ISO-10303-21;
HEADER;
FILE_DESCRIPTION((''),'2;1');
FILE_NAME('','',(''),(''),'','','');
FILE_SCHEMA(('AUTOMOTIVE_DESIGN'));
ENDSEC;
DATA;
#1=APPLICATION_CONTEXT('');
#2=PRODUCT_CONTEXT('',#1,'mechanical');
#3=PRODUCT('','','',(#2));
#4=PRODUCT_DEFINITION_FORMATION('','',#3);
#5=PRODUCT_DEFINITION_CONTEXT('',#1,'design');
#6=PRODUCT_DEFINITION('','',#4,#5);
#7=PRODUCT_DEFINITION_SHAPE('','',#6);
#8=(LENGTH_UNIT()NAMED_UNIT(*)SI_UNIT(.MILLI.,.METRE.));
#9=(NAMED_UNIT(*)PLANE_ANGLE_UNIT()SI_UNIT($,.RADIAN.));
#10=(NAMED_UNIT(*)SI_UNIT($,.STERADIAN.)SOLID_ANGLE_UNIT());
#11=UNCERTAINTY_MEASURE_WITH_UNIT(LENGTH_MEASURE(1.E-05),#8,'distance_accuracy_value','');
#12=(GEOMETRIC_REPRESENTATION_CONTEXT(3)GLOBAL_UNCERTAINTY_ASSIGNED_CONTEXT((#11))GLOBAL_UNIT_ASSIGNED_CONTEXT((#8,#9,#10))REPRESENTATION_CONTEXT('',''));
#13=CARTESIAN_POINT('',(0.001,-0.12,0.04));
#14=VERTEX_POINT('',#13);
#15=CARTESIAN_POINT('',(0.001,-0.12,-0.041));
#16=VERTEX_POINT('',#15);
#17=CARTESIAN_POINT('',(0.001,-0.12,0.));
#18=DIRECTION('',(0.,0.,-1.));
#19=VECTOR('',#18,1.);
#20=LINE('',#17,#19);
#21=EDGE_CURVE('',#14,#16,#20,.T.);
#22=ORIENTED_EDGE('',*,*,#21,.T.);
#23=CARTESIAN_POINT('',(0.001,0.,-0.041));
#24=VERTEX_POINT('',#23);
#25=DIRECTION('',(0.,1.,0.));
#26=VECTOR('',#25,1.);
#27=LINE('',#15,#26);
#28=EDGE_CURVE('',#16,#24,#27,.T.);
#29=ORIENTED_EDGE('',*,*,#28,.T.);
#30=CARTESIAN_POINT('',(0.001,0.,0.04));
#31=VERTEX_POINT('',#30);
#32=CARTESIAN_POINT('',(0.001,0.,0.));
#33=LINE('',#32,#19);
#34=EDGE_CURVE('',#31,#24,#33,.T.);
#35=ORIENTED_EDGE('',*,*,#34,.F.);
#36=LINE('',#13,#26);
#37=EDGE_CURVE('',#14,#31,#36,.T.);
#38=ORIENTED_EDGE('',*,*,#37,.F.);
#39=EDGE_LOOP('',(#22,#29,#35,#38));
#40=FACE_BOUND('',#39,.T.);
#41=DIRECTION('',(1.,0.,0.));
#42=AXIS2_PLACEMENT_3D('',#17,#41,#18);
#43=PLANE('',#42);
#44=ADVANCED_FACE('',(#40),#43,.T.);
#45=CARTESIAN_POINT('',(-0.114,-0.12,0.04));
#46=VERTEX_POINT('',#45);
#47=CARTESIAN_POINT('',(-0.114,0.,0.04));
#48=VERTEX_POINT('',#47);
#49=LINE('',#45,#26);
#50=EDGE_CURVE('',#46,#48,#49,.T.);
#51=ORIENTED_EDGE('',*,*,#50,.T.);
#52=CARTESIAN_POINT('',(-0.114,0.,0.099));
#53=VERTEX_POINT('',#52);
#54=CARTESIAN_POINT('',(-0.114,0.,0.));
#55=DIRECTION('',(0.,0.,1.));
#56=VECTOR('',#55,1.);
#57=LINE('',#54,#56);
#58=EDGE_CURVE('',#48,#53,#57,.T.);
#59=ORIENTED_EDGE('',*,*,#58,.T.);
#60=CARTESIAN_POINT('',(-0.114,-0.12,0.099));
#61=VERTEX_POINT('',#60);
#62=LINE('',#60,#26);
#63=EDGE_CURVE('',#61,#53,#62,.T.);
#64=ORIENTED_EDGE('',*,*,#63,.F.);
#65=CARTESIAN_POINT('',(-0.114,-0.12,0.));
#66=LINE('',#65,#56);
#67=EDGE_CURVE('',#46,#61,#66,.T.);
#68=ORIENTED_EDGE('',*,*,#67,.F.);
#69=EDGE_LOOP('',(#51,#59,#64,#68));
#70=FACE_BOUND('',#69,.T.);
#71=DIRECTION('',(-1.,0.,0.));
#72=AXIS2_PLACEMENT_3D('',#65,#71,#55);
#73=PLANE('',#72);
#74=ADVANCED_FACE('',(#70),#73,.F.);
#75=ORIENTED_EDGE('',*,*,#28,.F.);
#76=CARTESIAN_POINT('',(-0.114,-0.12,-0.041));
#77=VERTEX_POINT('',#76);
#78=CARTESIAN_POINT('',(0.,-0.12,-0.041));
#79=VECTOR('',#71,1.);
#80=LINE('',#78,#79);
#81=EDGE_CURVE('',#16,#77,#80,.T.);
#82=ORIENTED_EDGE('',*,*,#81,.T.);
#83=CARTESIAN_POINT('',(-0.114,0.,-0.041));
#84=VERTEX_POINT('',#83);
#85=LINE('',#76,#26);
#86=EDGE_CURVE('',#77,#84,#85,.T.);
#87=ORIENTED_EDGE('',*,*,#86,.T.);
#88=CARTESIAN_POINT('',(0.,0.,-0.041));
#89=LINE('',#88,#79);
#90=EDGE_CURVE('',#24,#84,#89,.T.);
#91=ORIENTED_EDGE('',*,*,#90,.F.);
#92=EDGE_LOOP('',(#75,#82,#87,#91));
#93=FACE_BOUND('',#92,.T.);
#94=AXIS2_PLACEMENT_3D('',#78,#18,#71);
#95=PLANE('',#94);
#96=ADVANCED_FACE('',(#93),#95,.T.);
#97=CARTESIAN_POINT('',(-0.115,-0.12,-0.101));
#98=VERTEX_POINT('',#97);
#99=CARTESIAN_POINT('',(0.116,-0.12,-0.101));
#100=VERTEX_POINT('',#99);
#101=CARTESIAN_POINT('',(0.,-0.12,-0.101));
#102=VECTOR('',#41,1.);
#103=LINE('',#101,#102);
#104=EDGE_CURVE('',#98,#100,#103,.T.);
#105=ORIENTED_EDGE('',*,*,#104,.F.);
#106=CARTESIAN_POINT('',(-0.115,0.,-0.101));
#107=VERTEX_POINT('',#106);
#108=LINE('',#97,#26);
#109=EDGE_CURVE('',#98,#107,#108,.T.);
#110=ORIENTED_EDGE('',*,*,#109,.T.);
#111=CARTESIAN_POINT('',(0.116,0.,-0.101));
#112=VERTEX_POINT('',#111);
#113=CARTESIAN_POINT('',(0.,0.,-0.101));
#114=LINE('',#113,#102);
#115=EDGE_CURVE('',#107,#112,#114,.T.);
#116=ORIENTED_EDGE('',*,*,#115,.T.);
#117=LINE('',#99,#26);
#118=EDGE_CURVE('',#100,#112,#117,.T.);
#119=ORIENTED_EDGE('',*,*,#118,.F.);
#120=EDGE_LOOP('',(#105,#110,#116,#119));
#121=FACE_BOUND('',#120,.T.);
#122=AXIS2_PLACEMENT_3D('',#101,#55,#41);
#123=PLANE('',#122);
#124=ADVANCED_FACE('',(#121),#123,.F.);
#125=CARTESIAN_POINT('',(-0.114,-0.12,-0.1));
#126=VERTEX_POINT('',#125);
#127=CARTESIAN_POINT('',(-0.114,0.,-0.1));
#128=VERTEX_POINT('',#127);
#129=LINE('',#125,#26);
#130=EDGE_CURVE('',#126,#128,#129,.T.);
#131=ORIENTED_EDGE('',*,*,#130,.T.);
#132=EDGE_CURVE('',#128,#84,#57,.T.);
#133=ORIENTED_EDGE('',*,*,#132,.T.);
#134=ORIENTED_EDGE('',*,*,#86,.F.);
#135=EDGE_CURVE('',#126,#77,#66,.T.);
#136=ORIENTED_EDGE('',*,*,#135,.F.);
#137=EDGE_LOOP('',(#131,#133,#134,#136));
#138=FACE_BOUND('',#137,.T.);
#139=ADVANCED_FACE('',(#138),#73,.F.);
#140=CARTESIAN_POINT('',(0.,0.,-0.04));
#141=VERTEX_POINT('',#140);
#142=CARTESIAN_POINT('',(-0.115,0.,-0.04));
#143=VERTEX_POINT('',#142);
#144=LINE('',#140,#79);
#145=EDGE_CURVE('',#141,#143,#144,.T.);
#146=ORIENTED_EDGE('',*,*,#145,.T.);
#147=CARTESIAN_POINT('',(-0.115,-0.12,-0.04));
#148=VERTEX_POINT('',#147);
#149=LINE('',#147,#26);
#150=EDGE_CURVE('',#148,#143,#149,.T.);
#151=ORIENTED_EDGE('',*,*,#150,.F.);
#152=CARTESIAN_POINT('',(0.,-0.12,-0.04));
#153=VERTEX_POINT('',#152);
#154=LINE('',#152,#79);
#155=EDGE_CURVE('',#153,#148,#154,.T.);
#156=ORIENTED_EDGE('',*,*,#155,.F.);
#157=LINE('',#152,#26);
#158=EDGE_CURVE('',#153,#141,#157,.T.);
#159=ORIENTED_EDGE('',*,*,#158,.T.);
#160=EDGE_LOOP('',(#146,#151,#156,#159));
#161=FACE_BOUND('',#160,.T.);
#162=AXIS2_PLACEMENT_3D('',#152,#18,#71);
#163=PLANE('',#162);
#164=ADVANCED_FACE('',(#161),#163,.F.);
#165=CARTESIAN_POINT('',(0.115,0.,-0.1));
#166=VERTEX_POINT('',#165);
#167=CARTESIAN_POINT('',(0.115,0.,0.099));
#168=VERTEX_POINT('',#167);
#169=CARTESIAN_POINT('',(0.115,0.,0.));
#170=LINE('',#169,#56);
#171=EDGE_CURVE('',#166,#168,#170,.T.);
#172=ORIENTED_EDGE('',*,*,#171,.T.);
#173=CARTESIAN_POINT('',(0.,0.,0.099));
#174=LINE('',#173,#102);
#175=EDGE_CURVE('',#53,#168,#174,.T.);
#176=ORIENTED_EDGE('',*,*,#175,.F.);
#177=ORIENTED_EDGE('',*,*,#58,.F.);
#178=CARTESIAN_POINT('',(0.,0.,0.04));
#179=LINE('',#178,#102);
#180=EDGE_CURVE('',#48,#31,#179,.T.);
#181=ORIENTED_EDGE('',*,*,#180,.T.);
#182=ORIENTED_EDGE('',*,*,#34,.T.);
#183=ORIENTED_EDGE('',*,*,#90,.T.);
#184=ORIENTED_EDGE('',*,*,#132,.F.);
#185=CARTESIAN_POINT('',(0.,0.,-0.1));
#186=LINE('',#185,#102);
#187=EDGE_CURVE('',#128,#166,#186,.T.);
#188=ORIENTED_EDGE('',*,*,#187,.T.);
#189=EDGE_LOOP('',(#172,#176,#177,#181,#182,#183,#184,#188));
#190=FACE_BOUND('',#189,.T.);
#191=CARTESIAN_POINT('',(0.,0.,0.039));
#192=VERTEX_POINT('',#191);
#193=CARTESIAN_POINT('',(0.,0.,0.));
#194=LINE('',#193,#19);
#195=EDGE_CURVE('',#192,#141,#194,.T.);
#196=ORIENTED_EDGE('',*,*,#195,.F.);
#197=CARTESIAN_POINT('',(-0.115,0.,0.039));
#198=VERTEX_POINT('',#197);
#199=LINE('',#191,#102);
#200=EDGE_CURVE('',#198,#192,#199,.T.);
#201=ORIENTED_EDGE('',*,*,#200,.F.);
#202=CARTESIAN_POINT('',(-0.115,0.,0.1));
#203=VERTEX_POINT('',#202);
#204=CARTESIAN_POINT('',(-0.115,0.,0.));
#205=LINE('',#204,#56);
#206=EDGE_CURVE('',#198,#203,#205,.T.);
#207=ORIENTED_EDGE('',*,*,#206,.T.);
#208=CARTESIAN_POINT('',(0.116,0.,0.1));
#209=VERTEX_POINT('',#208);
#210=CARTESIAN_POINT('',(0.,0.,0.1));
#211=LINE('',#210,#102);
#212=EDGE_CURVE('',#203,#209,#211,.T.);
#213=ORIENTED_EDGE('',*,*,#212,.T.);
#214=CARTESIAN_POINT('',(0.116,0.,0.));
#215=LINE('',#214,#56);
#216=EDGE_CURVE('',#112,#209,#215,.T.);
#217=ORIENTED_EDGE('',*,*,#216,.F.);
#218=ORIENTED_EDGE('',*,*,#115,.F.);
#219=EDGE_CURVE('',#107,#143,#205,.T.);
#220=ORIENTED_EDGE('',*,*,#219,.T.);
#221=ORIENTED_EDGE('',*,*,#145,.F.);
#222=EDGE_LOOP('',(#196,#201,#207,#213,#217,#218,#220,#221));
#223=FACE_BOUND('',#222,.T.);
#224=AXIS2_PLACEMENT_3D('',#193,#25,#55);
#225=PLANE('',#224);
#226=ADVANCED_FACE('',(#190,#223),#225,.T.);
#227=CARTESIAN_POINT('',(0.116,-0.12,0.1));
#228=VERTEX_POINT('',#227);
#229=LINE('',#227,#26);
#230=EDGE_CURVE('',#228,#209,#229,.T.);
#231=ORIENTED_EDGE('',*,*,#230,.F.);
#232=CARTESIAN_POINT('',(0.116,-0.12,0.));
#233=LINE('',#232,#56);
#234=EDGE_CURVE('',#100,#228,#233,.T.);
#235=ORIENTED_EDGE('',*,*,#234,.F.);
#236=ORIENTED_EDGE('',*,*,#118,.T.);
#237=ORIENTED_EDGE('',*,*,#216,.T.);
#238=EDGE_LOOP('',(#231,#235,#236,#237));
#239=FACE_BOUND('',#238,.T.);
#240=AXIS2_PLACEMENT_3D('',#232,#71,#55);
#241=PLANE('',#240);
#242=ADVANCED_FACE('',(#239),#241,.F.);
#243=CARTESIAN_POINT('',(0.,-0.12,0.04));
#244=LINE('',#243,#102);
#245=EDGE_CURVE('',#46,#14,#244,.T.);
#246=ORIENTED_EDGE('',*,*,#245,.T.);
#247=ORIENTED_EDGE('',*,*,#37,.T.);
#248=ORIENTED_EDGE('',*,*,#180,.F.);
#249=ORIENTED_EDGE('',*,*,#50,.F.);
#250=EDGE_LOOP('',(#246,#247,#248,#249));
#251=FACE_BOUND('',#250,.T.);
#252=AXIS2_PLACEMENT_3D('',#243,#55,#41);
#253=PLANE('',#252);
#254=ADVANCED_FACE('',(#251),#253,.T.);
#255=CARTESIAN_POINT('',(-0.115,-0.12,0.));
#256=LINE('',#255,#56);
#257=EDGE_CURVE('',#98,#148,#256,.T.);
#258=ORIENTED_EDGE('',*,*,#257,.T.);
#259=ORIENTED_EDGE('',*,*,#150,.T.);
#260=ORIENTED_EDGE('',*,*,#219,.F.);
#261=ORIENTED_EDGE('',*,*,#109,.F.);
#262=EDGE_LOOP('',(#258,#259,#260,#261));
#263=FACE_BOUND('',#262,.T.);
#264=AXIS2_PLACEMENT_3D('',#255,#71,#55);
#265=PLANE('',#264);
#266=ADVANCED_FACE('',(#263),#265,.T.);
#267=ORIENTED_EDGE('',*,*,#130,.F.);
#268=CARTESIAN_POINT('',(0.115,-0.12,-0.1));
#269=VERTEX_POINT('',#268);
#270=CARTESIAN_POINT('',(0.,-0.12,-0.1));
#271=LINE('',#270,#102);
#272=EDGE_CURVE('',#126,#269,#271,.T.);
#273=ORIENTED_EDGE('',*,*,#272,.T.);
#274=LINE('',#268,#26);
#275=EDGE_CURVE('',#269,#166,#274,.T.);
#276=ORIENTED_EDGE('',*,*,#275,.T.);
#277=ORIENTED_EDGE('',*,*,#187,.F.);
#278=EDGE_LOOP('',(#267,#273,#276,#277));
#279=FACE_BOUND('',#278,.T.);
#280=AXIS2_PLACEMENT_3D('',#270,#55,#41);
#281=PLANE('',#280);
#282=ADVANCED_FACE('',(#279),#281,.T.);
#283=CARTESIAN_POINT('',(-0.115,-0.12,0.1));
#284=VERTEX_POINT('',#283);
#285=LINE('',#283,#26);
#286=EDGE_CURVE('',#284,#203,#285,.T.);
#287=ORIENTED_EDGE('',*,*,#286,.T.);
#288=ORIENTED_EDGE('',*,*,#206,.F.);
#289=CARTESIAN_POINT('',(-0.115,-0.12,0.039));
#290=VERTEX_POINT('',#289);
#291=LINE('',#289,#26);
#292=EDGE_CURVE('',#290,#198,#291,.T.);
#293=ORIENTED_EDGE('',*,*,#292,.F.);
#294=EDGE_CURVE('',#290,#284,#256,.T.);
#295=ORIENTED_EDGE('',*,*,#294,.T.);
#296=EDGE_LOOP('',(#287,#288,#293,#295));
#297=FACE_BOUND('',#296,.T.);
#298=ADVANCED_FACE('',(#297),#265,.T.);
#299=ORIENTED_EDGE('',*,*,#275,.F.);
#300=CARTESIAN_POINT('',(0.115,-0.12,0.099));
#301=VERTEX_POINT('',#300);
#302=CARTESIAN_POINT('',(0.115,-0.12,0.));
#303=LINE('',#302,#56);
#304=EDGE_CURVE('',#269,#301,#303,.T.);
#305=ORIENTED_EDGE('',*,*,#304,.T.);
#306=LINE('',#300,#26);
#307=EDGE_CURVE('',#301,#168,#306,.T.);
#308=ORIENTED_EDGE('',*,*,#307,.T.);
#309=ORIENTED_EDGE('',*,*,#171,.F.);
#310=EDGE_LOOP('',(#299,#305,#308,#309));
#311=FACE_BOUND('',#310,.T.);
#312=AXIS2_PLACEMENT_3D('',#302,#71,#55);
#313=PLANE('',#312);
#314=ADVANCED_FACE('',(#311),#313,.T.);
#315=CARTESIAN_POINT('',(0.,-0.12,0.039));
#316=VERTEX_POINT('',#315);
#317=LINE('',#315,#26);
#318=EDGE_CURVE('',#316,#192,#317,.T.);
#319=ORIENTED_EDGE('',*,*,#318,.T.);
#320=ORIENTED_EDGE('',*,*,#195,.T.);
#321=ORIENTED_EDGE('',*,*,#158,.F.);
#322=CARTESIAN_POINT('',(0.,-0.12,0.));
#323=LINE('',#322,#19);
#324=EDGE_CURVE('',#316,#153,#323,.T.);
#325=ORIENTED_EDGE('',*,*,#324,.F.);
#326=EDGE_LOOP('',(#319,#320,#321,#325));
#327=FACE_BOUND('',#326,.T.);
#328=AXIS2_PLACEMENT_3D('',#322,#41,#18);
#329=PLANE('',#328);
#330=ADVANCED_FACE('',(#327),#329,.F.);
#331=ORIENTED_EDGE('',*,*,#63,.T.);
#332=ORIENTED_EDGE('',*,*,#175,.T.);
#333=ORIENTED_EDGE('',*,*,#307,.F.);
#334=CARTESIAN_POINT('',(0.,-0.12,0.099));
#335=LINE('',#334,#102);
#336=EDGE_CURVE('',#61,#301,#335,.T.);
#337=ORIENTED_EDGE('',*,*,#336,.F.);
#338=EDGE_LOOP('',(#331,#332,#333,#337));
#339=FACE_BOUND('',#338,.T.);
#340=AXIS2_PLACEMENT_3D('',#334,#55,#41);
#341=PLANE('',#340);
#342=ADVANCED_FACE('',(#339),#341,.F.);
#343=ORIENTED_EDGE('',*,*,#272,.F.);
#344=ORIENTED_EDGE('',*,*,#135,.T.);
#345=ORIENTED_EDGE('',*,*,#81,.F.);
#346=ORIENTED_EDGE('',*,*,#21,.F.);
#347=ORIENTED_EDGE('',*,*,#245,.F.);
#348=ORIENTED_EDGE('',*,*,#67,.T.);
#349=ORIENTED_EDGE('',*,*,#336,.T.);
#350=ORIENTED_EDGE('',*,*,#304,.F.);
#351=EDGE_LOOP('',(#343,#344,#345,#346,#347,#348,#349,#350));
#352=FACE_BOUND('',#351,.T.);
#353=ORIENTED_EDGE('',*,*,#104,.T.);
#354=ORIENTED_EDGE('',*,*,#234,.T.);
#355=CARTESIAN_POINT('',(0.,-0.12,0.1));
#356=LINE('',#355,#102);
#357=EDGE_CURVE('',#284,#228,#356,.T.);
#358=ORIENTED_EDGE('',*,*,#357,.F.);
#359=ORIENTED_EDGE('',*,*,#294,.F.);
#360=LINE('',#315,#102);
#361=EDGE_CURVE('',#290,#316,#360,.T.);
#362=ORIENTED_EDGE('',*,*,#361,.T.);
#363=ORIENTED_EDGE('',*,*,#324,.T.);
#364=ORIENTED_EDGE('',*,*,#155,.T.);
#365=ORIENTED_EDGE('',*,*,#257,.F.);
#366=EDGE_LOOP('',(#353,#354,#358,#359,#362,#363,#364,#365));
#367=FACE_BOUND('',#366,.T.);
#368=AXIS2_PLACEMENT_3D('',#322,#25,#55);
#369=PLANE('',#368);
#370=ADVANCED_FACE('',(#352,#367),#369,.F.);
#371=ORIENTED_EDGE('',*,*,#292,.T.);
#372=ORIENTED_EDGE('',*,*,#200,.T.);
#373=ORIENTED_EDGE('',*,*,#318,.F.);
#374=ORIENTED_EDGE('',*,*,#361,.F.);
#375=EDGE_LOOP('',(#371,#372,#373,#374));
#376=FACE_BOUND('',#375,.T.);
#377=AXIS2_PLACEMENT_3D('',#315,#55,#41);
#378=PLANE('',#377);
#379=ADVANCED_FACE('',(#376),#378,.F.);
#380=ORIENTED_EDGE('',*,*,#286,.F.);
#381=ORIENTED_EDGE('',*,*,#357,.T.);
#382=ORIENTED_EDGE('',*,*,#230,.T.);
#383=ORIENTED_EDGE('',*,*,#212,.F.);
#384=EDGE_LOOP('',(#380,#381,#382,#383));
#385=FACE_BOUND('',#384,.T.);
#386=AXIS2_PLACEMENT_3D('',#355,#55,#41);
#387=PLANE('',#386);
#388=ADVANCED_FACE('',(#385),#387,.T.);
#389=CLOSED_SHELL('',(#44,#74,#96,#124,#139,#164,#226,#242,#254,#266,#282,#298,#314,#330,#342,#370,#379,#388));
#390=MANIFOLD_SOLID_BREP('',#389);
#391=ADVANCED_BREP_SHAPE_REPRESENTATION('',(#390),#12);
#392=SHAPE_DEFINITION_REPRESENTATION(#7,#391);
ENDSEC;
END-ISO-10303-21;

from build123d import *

# Parameters (mm, degrees)
EXTRUDE_THIN1_START = -120
EXTRUDE_THIN1_DEPTH = 120
SCALE1_SCALE        = 0.001


# Read off the part's stored shape, not the designer's step: Extrude-Thin1
with BuildPart() as part:
    # Extrude-Thin1 outline → Extrude-Thin1 (new body)
    with BuildSketch(Plane(origin=(0, 0, 0), x_dir=(1, 0, 0), z_dir=(0, 1, 0)).offset(EXTRUDE_THIN1_START)):
        Polygon((-115, 40), (0, 40), (0, -39), (-115, -39), (-115, -100), (116, -100), (116, 101), (-115, 101), align=None)
        Polygon((1, -40), (1, 41), (-114, 41), (-114, 100), (115, 100), (115, -99), (-114, -99), (-114, -40), align=None, mode=Mode.SUBTRACT)
    extrude(amount=EXTRUDE_THIN1_DEPTH)


with BuildPart() as part_1:
    # Scale1: scaled about (0, 0, 0)
    add(part.part.scale(SCALE1_SCALE))


solid = part_1.part
